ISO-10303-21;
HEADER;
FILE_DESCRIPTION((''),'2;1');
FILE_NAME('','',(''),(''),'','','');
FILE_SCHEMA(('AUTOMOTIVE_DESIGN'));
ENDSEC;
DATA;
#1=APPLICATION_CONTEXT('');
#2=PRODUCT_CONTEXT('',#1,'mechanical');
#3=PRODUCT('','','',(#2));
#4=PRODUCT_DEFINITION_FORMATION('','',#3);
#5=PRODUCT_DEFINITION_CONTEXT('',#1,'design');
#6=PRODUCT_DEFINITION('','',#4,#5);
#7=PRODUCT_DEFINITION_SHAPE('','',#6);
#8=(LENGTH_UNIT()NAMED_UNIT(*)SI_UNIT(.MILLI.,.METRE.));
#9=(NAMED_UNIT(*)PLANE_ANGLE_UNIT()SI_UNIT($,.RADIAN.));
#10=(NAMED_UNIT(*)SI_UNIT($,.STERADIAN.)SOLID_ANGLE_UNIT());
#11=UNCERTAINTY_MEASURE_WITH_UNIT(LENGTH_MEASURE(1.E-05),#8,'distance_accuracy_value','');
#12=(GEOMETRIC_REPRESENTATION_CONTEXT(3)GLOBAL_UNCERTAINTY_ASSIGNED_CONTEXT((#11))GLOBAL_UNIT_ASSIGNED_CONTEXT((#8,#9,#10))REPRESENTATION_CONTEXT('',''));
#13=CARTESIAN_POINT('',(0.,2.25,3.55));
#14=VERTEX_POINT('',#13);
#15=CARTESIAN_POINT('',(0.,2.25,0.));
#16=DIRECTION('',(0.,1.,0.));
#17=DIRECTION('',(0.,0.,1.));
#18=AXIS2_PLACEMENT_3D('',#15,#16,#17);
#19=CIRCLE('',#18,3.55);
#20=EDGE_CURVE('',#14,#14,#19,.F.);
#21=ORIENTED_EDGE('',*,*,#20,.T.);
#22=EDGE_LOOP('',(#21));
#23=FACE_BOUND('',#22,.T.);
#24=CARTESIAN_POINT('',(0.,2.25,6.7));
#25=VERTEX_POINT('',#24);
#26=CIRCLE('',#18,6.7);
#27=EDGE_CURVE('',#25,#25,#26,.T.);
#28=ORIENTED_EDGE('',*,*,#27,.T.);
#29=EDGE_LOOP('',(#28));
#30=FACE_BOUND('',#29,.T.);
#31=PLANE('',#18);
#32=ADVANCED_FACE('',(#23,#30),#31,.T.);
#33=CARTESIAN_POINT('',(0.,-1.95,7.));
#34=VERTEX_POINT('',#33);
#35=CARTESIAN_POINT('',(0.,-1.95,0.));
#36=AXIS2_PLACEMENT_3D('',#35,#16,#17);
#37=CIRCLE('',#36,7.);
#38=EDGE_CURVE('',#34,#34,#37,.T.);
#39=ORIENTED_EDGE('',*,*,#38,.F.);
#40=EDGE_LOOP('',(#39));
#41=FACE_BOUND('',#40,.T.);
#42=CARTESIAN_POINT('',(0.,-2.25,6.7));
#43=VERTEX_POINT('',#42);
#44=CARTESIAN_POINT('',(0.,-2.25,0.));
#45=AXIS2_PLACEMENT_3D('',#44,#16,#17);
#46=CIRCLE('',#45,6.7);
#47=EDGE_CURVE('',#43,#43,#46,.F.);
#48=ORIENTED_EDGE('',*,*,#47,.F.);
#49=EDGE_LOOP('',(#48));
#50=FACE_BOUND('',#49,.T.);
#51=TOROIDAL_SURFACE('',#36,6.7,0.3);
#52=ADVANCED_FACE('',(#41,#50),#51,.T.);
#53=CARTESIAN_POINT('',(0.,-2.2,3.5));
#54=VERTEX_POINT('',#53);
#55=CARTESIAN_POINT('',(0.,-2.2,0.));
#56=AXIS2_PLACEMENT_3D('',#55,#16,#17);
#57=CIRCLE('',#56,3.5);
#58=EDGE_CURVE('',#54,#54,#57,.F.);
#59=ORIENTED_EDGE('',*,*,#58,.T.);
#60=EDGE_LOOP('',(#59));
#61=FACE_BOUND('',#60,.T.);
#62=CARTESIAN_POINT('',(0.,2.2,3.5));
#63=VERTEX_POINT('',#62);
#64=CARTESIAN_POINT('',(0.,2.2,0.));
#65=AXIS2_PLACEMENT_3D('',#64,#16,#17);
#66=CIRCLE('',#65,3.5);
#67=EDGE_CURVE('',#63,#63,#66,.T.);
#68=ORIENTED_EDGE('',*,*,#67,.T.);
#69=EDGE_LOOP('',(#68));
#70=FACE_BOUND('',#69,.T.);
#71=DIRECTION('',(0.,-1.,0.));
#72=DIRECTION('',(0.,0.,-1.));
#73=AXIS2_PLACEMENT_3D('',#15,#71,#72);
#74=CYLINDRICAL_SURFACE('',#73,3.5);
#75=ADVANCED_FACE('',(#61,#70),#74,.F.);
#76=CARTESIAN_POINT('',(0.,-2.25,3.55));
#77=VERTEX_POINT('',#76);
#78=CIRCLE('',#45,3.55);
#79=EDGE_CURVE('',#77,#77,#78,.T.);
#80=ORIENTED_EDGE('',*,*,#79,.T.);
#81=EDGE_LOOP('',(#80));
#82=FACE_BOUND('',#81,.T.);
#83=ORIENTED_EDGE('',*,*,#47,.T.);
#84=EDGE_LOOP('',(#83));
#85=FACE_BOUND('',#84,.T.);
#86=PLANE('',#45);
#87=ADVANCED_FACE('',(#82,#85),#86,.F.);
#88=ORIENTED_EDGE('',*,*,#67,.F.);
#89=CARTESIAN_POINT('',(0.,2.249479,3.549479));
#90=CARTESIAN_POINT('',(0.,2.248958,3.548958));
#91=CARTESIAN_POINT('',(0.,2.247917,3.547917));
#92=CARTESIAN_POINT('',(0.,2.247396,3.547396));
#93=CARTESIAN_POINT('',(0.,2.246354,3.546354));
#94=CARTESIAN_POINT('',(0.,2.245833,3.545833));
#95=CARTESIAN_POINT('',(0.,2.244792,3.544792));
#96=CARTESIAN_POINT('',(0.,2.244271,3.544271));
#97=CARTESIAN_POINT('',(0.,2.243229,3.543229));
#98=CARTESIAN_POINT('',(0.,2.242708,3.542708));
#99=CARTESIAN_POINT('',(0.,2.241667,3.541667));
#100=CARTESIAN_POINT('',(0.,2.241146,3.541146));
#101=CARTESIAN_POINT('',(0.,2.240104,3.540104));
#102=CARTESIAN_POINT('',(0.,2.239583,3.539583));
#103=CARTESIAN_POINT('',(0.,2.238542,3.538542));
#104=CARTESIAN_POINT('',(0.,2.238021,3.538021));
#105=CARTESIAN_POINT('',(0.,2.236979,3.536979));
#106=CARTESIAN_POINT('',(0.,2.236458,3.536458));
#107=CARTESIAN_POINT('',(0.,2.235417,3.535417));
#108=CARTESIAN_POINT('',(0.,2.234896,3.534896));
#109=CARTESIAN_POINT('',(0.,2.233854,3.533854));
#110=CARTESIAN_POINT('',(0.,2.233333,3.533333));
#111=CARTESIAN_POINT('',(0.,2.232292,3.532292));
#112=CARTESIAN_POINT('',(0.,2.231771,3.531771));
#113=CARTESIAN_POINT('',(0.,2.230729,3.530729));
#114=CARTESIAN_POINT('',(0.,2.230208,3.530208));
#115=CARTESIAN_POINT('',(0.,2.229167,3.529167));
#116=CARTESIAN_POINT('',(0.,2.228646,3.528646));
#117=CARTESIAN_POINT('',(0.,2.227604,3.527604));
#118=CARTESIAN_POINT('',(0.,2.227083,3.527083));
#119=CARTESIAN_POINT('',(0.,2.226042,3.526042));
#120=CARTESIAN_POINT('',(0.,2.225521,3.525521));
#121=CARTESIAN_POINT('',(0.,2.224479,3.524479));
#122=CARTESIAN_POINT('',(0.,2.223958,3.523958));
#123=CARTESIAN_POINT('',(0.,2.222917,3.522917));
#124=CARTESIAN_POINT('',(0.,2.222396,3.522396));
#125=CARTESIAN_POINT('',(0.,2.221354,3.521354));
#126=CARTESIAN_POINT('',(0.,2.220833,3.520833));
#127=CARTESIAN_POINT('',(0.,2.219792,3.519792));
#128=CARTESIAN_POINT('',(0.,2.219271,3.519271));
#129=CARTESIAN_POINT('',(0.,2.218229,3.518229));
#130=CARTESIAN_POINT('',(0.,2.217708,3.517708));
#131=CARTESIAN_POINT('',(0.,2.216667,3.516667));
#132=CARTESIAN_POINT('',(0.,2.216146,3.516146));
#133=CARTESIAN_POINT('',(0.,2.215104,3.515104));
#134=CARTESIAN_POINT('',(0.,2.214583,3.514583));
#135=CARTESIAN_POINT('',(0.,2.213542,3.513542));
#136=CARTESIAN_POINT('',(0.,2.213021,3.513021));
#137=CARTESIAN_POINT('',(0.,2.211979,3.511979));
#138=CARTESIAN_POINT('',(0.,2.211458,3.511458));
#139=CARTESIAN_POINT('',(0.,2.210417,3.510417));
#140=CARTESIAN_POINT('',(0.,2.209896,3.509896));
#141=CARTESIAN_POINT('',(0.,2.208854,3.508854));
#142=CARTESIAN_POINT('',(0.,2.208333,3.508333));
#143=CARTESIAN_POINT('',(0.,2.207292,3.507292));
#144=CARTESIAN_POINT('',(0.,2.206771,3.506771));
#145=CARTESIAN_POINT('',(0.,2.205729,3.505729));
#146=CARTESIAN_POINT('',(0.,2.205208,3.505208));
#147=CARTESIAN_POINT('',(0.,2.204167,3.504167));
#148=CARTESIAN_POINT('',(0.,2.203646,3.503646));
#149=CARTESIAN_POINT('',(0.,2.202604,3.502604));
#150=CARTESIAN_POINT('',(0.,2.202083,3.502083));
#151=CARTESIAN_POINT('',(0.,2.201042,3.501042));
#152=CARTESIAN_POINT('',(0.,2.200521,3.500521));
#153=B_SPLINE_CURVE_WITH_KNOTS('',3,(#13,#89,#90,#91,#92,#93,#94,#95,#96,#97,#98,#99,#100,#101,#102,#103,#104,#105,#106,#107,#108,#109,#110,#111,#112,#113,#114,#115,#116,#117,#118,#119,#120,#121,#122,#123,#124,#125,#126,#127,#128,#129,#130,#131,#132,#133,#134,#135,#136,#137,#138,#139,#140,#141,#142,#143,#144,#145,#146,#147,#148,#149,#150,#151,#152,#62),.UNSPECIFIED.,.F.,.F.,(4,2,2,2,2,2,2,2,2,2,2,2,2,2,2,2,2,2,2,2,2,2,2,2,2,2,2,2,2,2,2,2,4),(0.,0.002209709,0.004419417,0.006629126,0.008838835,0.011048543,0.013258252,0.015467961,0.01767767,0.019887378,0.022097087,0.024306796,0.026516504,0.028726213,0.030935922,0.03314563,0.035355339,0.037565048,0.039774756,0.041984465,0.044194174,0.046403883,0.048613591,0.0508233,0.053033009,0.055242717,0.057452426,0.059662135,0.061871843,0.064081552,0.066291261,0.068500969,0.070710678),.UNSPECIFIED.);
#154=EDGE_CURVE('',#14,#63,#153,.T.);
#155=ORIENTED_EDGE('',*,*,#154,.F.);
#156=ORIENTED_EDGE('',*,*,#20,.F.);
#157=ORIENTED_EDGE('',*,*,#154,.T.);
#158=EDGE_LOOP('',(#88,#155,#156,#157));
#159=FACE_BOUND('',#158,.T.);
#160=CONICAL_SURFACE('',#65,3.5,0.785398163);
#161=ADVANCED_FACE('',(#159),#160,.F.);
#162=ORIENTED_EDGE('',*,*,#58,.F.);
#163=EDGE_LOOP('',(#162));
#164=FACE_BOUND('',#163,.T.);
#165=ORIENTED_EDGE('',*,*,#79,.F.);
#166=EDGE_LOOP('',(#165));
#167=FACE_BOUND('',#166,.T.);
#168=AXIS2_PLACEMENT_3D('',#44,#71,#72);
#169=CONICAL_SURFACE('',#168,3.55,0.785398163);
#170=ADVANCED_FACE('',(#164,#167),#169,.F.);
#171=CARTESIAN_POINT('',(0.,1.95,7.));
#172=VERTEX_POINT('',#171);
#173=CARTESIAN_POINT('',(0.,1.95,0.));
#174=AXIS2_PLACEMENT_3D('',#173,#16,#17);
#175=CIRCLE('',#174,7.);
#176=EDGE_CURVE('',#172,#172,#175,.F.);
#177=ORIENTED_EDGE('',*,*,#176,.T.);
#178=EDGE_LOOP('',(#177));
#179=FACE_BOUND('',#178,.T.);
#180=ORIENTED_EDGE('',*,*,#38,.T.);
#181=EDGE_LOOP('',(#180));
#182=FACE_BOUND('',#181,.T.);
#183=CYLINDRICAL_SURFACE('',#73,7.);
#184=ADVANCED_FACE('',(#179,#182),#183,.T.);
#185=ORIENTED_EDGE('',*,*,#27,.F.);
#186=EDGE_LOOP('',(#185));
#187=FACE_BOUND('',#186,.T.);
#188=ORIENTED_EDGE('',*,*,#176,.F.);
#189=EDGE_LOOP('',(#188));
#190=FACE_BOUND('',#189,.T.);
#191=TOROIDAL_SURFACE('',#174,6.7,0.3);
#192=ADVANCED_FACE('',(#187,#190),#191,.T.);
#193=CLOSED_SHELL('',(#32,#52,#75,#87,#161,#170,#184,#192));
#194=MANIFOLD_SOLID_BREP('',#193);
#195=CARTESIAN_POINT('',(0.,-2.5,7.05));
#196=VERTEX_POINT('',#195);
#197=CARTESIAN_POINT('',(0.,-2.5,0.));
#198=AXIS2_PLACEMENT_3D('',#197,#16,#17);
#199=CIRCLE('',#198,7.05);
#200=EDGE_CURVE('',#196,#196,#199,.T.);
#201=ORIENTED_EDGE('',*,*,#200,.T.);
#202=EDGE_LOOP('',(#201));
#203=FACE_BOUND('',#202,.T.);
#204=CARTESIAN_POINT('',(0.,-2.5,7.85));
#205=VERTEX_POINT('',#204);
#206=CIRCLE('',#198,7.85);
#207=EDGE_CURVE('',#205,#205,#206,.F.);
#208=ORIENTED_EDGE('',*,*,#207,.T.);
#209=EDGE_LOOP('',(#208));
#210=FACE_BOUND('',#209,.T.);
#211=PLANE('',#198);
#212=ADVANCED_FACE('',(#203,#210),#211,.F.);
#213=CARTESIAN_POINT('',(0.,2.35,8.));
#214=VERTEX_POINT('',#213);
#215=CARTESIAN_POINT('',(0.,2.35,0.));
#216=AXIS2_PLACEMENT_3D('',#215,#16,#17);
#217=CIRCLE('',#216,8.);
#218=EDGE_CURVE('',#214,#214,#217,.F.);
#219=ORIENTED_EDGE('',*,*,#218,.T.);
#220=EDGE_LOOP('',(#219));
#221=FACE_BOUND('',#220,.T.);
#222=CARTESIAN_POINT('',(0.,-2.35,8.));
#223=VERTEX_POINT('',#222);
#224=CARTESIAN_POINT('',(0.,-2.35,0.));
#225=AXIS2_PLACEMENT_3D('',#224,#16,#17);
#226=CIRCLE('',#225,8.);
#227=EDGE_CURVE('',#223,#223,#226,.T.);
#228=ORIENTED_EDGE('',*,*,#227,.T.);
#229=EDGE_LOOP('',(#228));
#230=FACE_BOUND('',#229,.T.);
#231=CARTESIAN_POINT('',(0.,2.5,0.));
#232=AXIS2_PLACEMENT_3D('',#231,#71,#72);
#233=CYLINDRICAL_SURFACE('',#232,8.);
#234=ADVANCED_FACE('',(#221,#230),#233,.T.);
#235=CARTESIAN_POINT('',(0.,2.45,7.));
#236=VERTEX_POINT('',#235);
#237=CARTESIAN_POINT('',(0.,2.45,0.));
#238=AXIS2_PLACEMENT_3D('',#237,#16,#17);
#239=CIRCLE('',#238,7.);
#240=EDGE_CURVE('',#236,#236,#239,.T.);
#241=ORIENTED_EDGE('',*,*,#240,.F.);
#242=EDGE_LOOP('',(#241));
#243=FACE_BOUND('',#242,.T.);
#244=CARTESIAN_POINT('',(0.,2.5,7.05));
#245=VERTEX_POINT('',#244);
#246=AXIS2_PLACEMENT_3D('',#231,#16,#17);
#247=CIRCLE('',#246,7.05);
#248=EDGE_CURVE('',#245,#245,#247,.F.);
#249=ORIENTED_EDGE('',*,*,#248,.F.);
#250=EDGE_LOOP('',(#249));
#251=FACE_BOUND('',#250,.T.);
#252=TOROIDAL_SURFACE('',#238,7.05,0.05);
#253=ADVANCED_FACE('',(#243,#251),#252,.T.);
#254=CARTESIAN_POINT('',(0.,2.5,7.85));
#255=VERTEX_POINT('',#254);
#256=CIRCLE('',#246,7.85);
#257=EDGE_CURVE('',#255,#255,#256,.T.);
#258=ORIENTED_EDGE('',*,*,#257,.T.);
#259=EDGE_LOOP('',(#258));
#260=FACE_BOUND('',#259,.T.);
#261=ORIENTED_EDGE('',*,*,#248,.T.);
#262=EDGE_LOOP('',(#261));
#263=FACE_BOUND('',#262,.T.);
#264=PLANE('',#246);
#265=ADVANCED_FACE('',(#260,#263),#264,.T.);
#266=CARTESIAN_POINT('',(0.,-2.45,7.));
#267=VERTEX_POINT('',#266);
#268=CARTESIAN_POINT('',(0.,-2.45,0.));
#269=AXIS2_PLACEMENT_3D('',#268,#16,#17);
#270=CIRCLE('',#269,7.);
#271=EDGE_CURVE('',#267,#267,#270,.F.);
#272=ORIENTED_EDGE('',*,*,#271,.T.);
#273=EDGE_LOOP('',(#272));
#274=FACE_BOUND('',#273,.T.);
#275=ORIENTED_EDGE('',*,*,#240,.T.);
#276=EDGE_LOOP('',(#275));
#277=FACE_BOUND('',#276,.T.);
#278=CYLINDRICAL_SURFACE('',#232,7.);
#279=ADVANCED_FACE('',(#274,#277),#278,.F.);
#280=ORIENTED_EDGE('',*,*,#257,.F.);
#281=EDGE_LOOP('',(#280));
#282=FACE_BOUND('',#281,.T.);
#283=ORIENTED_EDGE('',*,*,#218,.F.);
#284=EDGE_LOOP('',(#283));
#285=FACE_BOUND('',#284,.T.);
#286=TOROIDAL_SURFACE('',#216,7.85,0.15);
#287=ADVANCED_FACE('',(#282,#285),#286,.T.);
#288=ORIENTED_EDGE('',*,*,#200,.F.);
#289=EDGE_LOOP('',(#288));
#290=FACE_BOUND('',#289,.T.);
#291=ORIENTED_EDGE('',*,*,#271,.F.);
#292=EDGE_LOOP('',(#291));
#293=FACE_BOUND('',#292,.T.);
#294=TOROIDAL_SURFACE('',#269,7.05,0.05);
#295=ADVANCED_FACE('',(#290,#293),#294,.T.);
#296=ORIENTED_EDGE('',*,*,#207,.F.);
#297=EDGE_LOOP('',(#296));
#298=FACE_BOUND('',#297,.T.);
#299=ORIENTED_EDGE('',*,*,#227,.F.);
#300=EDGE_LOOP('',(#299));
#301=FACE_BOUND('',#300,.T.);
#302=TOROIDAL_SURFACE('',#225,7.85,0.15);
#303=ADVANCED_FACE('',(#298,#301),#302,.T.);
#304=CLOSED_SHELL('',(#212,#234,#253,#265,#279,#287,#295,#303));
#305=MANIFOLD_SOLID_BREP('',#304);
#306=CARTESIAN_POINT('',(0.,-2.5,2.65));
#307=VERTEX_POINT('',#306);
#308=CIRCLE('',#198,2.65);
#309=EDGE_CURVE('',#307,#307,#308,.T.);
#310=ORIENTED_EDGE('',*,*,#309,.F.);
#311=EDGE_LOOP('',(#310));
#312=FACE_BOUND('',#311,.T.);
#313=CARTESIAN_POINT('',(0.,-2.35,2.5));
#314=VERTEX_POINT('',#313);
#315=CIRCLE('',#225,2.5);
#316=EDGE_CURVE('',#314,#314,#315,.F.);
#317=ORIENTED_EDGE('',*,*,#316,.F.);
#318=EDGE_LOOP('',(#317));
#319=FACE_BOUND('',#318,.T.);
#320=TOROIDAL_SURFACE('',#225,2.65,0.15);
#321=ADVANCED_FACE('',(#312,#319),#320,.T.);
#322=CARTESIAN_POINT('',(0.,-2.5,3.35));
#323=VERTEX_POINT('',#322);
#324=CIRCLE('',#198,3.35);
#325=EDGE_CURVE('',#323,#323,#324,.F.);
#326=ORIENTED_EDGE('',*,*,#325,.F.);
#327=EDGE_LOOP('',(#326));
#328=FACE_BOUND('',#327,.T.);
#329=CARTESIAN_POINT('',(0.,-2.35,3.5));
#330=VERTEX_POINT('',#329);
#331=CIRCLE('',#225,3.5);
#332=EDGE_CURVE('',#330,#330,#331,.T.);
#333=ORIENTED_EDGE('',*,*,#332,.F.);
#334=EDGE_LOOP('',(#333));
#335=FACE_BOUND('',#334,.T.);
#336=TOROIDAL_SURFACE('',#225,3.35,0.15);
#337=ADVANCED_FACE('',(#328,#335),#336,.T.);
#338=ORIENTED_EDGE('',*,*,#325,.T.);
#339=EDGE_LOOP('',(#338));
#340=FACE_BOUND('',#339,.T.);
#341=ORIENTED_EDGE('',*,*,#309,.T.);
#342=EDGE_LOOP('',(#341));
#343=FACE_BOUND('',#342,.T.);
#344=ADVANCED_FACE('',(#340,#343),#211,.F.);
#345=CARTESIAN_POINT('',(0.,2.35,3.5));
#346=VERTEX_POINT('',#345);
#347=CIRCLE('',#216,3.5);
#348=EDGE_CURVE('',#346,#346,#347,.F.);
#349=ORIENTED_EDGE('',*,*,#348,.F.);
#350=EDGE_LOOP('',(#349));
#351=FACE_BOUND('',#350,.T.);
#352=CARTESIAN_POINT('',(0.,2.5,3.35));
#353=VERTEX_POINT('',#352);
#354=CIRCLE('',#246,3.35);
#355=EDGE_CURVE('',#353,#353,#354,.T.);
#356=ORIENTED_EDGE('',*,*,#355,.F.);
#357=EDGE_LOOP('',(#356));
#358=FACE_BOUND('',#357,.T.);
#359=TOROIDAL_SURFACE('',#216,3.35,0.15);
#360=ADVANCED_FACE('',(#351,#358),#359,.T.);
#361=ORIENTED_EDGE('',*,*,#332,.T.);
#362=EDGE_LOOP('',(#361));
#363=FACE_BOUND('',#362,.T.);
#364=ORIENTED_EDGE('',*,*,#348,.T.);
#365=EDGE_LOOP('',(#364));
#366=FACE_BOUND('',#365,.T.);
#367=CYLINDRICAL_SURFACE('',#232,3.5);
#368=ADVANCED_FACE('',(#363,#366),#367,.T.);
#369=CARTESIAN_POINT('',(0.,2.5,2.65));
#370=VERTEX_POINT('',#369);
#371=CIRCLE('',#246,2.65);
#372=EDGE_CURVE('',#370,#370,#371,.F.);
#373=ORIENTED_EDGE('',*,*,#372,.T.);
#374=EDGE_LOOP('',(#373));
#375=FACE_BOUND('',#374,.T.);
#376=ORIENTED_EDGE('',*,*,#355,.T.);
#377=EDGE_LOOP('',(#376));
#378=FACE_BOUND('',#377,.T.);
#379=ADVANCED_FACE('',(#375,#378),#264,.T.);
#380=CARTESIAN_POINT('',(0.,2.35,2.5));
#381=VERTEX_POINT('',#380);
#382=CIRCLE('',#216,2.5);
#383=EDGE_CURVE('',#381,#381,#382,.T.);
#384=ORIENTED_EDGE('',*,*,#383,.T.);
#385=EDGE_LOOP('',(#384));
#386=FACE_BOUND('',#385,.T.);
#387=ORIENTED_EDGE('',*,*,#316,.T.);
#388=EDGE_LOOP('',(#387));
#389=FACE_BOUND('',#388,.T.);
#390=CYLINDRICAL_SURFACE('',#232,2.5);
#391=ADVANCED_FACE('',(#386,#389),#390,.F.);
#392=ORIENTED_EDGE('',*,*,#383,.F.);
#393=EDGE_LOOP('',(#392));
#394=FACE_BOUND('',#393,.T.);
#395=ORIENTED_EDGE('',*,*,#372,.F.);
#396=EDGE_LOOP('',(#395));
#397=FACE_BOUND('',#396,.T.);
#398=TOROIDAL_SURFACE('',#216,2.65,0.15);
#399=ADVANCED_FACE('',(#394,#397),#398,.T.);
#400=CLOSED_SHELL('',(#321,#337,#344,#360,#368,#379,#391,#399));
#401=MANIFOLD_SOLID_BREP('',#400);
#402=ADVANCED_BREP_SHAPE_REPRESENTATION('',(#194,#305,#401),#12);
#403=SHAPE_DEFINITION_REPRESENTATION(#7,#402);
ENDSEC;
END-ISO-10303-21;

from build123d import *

# Parameters (mm, degrees)
SKETCH1_R             = 8
SKETCH1_R_2           = 7
BOSS_EXTRUDE1_DEPTH   = 2.5
SKETCH1_R_3           = 3.5
SKETCH1_R_4           = 2.5
BOSS_EXTRUDE1_2_DEPTH = 2.5
FILLET1_R             = 0.15
FILLET2_R             = 0.15
FILLET3_R             = 0.05
SKETCH2_R             = 7
SKETCH2_R_2           = 3.5
BOSS_EXTRUDE2_DEPTH   = 2.25
FILLET4_R             = 0.3
CHAMFER1_SIZE         = 0.05


with BuildPart() as part:
    # Sketch1 → Boss-Extrude1 (new, symmetric)
    with BuildSketch(Plane(origin=(0, 0, 0), x_dir=(1, 0, 0), z_dir=(0, 1, 0))):
        Circle(SKETCH1_R)
        Circle(SKETCH1_R_2, mode=Mode.SUBTRACT)
    extrude(amount=BOSS_EXTRUDE1_DEPTH, both=True)

    # Fillet2
    fillet2_edges = [part.edges().sort_by_distance(p)[0] for p in [
        (-8, -2.5, 0),
        (-8, 2.5, 0),
    ]]
    fillet(fillet2_edges, radius=FILLET2_R)

    # Fillet3
    fillet3_edges = [part.edges().sort_by_distance(p)[0] for p in [
        (-7, -2.5, 0),
        (-7, 2.5, 0),
    ]]
    fillet(fillet3_edges, radius=FILLET3_R)


with BuildPart() as body_2:
    # Sketch1 → Boss-Extrude1 2 (new, symmetric)
    with BuildSketch(Plane(origin=(0, 0, 0), x_dir=(1, 0, 0), z_dir=(0, 1, 0))):
        Circle(SKETCH1_R_3)
        Circle(SKETCH1_R_4, mode=Mode.SUBTRACT)
    extrude(amount=BOSS_EXTRUDE1_2_DEPTH, both=True)

    # Fillet1
    fillet1_edges = [body_2.edges().sort_by_distance(p)[0] for p in [
        (-2.5, -2.5, 0),
        (-2.5, 2.5, 0),
        (-3.5, -2.5, 0),
        (-3.5, 2.5, 0),
    ]]
    fillet(fillet1_edges, radius=FILLET1_R)


with BuildPart() as body_3:
    # Sketch2 → Boss-Extrude2 (new, symmetric)
    with BuildSketch(Plane(origin=(0, 0, 0), x_dir=(1, 0, 0), z_dir=(0, 1, 0))):
        Circle(SKETCH2_R)
        Circle(SKETCH2_R_2, mode=Mode.SUBTRACT)
    extrude(amount=BOSS_EXTRUDE2_DEPTH, both=True)

    # Fillet4
    fillet4_edges = [body_3.edges().sort_by_distance(p)[0] for p in [
        (-7, -2.25, 0),
        (-7, 2.25, 0),
    ]]
    fillet(fillet4_edges, radius=FILLET4_R)

    # Chamfer1
    chamfer1_edges = [body_3.edges().sort_by_distance(p)[0] for p in [
        (-3.5, -2.25, 0),
        (-3.5, 2.25, 0),
    ]]
    chamfer(chamfer1_edges, length=CHAMFER1_SIZE)


solid = Compound([part.part, body_2.part, body_3.part])
